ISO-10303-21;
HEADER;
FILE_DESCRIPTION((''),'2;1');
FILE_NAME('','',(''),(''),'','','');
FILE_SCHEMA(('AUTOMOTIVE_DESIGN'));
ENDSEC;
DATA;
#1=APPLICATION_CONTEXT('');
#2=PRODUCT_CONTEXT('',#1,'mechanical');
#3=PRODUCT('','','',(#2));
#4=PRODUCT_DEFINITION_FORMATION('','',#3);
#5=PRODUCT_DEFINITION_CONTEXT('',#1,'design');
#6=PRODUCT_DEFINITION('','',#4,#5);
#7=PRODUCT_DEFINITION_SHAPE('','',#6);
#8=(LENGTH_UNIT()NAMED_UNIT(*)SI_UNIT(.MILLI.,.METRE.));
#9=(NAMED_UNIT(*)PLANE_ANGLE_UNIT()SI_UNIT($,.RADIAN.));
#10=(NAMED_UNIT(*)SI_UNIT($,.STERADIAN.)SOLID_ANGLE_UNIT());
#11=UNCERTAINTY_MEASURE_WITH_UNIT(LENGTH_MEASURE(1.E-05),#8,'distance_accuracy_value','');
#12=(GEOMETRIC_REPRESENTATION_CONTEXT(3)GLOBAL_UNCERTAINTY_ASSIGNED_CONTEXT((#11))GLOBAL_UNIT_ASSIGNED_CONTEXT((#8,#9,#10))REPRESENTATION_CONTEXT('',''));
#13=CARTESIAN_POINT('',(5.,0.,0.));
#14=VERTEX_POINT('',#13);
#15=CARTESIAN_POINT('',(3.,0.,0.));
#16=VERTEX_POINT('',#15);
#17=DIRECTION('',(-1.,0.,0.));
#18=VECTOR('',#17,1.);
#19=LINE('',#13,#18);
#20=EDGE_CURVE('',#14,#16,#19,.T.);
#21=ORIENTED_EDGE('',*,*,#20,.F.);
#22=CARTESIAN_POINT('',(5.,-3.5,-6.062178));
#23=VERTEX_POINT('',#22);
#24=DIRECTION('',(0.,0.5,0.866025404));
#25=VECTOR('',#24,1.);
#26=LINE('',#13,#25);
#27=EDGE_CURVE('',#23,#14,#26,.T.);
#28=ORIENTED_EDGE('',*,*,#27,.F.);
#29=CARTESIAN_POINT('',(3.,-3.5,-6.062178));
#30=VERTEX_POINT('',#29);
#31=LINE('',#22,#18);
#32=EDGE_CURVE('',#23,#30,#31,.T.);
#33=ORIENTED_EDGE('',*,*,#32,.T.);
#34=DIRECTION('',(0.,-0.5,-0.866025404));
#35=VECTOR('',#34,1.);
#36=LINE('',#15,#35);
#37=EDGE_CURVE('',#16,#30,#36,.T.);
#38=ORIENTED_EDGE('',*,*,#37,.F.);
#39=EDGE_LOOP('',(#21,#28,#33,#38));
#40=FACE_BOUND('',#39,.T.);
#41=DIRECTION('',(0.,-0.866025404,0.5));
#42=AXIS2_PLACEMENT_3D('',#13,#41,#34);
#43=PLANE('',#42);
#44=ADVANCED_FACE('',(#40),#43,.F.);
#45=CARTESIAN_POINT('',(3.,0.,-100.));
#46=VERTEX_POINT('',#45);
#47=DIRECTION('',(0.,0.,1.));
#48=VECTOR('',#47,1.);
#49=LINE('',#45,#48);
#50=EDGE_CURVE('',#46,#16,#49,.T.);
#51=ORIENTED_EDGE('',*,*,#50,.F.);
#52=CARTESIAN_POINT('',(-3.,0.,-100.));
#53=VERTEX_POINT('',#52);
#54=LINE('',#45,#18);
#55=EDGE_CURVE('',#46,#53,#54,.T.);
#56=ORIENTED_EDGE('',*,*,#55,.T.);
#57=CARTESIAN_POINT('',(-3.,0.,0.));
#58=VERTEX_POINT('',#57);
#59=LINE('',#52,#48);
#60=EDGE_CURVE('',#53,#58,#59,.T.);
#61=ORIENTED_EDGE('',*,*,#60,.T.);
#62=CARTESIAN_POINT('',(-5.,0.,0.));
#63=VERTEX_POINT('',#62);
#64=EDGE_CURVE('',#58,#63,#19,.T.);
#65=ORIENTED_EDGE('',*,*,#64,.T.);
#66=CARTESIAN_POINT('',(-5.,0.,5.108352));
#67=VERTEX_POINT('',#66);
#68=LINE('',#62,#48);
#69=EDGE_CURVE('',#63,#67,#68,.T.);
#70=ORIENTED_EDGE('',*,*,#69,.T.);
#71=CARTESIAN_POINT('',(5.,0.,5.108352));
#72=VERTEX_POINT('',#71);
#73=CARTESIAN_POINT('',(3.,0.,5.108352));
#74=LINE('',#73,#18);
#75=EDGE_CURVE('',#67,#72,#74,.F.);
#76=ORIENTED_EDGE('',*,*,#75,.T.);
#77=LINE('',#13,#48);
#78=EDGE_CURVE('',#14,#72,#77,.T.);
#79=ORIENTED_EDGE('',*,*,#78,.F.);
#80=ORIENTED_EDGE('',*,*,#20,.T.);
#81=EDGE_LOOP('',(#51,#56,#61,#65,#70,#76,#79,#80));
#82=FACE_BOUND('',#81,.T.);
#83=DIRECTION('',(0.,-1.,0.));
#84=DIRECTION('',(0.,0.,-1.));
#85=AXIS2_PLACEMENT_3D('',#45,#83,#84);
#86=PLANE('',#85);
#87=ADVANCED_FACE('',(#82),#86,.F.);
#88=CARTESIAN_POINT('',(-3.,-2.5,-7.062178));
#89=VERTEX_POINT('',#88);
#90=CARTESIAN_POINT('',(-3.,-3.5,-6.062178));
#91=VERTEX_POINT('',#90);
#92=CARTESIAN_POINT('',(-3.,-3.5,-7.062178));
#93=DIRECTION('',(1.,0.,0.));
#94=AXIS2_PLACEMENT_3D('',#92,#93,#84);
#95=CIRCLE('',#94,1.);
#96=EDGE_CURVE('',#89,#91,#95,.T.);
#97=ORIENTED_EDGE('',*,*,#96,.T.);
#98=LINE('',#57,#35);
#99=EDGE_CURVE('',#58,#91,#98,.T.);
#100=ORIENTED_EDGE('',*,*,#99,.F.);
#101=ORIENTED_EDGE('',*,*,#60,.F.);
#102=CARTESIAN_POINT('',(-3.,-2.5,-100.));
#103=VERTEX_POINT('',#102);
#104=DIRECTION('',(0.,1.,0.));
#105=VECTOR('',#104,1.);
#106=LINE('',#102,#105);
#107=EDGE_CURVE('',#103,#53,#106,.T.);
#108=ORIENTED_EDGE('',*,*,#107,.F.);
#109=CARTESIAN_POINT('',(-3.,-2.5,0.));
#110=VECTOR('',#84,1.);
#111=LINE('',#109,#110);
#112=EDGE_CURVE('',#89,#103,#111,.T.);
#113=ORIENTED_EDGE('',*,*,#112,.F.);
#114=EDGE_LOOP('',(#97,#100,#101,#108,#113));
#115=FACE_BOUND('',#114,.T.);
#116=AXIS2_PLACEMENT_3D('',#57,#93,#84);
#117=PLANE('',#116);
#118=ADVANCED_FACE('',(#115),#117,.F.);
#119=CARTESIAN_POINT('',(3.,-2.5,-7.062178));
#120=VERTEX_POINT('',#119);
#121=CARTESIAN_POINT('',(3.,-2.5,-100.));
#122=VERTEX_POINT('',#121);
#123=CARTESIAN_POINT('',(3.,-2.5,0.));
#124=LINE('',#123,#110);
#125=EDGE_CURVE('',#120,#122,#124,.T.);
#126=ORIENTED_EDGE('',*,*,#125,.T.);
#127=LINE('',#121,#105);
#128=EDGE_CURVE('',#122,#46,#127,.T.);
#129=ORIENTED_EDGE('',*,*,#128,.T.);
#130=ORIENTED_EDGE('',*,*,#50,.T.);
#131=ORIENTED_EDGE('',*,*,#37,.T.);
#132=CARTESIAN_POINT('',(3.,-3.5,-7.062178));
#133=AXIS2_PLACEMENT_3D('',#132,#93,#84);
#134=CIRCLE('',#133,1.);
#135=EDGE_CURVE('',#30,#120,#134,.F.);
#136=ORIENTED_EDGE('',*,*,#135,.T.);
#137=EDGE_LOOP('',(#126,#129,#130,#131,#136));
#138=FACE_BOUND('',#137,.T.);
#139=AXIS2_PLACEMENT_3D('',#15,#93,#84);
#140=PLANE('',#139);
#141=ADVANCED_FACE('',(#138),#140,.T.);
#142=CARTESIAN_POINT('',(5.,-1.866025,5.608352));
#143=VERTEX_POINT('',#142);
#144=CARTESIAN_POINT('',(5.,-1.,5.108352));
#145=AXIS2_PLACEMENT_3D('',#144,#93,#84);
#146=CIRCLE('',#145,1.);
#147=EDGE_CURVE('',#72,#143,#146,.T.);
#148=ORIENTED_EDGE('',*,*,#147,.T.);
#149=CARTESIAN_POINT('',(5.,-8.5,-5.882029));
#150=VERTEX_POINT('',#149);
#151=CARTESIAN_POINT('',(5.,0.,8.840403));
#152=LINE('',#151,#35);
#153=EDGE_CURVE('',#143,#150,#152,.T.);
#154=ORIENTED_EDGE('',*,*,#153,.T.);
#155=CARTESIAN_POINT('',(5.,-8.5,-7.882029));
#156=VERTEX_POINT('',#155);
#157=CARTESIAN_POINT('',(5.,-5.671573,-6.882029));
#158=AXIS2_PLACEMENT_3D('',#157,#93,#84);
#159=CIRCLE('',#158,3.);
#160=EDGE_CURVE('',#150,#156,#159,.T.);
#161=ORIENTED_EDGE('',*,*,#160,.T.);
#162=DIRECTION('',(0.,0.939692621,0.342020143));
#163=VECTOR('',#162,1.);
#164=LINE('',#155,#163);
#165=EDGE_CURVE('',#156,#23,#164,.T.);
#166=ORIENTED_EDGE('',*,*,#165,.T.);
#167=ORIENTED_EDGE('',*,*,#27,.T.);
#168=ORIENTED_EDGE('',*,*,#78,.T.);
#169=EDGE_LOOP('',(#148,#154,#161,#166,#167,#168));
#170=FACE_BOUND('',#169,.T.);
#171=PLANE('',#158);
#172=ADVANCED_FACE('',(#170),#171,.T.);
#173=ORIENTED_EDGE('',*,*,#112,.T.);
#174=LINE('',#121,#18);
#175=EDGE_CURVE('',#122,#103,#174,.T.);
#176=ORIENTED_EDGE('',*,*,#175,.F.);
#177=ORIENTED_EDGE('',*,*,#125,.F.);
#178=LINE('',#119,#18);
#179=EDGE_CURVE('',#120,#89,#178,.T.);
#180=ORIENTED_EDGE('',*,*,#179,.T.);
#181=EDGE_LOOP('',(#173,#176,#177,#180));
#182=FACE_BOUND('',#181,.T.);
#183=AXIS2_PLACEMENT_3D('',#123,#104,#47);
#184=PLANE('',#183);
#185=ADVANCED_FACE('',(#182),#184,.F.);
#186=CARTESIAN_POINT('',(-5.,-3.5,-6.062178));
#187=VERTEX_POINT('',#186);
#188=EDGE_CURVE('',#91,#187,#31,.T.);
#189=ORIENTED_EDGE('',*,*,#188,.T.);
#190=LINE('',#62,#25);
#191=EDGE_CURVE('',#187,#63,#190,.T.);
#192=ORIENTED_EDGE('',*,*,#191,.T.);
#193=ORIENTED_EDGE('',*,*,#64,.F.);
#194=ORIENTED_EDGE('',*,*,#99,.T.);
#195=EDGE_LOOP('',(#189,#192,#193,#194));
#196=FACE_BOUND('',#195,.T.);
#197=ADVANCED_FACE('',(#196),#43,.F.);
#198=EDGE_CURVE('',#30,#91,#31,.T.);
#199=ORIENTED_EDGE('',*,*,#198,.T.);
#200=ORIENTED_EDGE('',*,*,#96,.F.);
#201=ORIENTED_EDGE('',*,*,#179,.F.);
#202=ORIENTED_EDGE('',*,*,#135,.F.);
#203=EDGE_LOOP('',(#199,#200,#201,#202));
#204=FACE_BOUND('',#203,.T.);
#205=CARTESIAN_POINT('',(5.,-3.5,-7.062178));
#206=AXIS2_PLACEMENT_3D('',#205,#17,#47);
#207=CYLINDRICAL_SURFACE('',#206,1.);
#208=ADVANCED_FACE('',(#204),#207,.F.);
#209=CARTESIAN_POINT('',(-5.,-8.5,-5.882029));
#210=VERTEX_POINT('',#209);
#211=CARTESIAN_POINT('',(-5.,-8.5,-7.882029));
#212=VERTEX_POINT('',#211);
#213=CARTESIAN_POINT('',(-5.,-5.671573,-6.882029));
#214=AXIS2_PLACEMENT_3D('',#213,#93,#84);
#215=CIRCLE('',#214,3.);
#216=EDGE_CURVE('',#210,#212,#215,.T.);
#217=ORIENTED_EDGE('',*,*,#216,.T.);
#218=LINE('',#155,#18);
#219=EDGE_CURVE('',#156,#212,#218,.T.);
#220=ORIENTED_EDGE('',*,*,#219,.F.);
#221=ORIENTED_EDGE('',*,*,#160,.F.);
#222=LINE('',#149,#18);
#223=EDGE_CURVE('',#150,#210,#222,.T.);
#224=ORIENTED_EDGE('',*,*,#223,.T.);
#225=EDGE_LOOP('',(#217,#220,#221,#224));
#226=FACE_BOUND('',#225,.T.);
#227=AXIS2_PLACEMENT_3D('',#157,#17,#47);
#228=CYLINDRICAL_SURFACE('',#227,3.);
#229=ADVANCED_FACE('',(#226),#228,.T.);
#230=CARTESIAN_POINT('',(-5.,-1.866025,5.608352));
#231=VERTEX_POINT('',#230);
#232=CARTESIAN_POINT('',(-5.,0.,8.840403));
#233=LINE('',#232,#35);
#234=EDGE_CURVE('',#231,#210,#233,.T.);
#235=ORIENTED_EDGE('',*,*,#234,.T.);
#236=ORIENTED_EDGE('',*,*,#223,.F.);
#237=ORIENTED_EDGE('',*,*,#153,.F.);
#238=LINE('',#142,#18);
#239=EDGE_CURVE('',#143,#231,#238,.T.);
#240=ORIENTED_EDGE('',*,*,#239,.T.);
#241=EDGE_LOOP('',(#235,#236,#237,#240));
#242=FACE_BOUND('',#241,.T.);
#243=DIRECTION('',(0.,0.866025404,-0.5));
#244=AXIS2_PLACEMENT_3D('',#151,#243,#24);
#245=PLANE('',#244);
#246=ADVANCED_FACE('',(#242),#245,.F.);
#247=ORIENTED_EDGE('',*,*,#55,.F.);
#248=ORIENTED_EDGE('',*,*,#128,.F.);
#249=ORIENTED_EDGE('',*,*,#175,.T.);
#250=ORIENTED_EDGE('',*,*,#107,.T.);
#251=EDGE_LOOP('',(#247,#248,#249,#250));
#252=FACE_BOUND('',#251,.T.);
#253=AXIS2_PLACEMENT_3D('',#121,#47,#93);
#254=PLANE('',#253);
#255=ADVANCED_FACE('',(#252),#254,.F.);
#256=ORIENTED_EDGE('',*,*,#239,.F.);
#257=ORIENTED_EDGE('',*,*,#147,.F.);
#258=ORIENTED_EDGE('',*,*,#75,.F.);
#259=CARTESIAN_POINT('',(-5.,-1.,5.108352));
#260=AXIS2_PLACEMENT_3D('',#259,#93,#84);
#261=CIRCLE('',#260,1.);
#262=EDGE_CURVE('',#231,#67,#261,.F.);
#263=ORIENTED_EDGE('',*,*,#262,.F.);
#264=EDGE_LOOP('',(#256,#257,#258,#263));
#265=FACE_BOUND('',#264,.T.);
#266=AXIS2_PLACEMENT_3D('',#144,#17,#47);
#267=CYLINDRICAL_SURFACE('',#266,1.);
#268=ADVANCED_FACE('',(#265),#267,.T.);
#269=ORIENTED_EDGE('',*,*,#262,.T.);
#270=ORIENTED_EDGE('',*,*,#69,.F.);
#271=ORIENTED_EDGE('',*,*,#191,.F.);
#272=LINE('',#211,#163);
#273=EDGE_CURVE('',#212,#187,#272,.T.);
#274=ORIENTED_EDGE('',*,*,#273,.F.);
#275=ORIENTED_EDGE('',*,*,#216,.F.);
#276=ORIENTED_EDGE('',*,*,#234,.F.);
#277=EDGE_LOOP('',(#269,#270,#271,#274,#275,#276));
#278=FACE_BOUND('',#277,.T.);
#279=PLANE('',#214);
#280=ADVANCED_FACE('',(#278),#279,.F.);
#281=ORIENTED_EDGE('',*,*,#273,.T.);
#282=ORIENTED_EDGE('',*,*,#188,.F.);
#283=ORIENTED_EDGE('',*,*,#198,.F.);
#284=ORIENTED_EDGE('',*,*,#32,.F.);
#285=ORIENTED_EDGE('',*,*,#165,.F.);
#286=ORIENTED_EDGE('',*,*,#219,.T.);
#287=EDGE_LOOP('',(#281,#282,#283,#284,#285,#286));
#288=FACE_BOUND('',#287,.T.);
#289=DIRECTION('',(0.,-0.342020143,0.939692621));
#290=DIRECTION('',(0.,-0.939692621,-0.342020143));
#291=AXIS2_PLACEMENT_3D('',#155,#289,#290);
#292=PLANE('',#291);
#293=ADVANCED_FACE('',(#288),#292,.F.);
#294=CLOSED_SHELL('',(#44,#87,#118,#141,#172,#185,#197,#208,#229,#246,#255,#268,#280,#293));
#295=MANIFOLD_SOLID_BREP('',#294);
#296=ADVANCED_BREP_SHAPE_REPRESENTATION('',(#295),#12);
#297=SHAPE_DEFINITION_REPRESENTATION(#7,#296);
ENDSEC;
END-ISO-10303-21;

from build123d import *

# Parameters (mm, degrees)
SKETCH1_W           = 100
SKETCH1_H           = 2.5
BOSS_EXTRUDE1_DEPTH = 3
BOSS_EXTRUDE2_DEPTH = 5
FILLET4_R           = 1
FILLET2_R           = 1


with BuildPart() as part:
    # Sketch1 → Boss-Extrude1 (new, symmetric)
    with BuildSketch(Plane(origin=(0, 0, 0), x_dir=(0, 0, -1), z_dir=(1, 0, 0))):
        with Locations((50, -1.25)):
            Rectangle(SKETCH1_W, SKETCH1_H)
    extrude(amount=BOSS_EXTRUDE1_DEPTH, both=True)

    # Sketch2 → Boss-Extrude2 (add, symmetric)
    with BuildSketch(Plane(origin=(0, 0, 0), x_dir=(0, 0, -1), z_dir=(1, 0, 0))):
        with BuildLine():
            Line((0, 0), (-8.840402867, 0))
            Line((-8.840402867, 0), (5.882028998, -8.5))
            ThreePointArc((5.882028998, -8.5), (6.882028998, -8.671572875), (7.882028998, -8.5))
            Line((7.882028998, -8.5), (6.062177826, -3.5))
            Line((6.062177826, -3.5), (0, 0))
        make_face()
    extrude(amount=BOSS_EXTRUDE2_DEPTH, both=True)

    # Fillet4
    # the kernel refuses this fillet: 1 mm, written as the material it adds along each edge
    with BuildSketch(Plane(origin=(-3, -2.5, -4.330127019), x_dir=(0, 0, -1), z_dir=(1, 0, 0))) as fillet4_piece_1:
        with BuildLine():
            CenterArc((2.732050808, -1), FILLET4_R, 90, 90)
            Line((1.732050808, -1), (1.712050808, -1))
            ThreePointArc((1.712050808, -1), (0.856025404, -0.517320508), (-0.01, -0.017320508))
            Line((-0.01, -0.017320508), (0, 0.02))
            Line((0, 0.02), (2.732050808, 0.02))
            Line((2.732050808, 0.02), (2.732050808, 0))
        make_face()
    extrude(amount=6)

    # Fillet2
    fillet2_edges = [part.edges().sort_by_distance(p)[0] for p in [
        (0, 0, 8.840402867),
    ]]
    fillet(fillet2_edges, radius=FILLET2_R)


solid = part.part
